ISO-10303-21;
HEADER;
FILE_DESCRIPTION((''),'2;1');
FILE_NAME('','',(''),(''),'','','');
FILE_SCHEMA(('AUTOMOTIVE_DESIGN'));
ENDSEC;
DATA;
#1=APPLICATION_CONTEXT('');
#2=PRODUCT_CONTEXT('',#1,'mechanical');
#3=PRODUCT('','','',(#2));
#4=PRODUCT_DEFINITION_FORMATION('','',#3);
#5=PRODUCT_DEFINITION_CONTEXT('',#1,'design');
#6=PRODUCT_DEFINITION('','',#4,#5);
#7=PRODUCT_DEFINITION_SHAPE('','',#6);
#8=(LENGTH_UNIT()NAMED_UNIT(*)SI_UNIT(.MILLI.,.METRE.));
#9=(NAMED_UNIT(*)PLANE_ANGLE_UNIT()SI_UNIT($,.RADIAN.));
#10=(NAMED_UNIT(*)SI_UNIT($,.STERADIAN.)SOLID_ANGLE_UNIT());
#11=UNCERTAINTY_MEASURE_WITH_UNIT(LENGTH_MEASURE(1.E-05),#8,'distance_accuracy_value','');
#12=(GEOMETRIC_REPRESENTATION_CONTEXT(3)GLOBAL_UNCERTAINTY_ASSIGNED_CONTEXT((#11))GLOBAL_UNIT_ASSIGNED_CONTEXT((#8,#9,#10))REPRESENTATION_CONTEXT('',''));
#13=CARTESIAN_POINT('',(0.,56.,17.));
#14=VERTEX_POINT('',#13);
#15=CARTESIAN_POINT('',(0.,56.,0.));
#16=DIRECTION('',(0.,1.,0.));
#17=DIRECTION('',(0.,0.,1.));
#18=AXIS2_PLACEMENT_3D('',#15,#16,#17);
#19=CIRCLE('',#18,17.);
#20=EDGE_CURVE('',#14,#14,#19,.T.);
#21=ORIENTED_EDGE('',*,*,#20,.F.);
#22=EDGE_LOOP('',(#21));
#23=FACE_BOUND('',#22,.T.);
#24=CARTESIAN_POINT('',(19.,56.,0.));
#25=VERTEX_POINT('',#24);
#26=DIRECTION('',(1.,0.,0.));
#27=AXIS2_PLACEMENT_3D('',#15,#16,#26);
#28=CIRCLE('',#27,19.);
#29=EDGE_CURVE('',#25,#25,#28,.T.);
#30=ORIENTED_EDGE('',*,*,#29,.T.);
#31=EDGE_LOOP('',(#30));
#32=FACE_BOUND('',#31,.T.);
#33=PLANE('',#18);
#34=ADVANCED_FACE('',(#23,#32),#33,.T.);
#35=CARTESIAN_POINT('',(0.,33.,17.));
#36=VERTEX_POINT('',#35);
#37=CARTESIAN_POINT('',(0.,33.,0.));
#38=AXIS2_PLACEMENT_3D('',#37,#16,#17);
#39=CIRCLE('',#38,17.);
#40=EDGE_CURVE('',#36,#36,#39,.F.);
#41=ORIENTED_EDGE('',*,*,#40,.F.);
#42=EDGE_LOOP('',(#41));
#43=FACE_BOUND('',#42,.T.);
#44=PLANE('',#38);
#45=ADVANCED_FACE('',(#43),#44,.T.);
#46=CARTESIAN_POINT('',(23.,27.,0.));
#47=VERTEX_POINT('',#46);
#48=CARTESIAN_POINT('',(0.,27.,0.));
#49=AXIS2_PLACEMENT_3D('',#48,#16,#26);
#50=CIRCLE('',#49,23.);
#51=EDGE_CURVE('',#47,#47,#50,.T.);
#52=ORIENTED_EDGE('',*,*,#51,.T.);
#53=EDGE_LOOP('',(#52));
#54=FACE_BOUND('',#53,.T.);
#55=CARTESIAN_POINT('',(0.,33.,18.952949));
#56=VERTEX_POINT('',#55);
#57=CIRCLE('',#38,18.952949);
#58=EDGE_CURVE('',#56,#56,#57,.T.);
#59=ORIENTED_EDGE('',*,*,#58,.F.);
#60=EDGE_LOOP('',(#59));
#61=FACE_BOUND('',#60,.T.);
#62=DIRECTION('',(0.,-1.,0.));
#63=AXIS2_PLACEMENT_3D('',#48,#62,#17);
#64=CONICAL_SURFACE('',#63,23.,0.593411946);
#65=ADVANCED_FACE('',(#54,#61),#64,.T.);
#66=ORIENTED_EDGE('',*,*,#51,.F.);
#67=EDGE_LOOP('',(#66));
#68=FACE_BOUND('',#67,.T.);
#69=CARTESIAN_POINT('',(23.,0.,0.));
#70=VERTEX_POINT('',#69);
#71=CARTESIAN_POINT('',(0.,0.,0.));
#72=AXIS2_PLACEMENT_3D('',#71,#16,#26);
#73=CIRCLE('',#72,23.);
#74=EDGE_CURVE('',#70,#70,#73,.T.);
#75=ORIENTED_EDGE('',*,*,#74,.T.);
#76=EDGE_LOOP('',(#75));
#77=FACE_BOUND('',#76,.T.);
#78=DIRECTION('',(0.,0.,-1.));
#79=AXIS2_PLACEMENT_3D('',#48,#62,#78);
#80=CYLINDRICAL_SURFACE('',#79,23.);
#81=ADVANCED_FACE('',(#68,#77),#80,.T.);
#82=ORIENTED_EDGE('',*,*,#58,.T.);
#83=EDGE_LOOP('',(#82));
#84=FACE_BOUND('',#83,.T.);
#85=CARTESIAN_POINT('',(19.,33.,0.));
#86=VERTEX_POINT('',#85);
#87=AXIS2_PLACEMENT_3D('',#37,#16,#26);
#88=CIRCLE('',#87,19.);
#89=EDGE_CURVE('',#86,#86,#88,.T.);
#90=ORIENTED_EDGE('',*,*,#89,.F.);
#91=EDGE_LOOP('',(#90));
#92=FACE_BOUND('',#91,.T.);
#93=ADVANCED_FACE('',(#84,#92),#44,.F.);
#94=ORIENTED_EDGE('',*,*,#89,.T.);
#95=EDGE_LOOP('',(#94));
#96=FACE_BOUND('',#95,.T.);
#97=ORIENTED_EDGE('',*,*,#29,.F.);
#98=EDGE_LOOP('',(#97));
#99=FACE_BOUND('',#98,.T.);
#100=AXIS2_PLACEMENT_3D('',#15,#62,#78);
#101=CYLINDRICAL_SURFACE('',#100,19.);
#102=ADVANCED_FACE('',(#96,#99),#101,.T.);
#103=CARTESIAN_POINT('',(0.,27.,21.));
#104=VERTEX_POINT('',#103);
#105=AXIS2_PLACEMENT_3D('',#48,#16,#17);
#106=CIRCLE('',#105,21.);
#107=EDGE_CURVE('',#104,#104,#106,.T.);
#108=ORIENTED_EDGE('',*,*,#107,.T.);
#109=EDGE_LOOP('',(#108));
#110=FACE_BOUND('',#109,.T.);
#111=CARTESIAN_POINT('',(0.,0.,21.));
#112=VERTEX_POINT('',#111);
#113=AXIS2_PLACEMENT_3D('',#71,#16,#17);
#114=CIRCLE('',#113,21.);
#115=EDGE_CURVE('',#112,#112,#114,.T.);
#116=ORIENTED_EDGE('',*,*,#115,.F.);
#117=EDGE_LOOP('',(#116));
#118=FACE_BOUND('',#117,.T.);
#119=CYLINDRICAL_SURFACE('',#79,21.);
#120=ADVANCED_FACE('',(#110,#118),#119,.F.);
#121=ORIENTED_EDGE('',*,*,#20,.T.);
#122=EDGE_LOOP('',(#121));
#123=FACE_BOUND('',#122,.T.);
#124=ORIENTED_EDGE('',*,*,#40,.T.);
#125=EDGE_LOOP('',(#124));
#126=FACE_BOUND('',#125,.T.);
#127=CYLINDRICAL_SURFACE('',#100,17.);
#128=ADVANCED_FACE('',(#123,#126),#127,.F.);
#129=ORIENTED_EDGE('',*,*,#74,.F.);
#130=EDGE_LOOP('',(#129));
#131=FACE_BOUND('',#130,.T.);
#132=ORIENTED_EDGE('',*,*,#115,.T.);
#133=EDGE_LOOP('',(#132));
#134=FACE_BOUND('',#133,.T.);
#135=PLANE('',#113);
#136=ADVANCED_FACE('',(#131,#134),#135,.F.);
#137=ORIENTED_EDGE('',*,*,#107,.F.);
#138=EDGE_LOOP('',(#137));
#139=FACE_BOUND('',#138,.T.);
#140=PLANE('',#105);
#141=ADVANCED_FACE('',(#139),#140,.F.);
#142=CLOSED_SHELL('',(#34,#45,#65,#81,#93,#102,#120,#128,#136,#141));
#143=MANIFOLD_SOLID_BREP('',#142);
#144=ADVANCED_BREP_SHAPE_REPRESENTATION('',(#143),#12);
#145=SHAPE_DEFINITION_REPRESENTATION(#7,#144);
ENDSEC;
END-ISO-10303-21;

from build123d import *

# Parameters (mm, degrees)
SKETCH1_R           = 23
SKETCH1_R_2         = 21
EXTRUDE_THIN1_DEPTH = 27
SKETCH2_R           = 19
SKETCH2_R_2         = 17
EXTRUDE_THIN2_DEPTH = 23
SKETCH3_R           = 21
BOSS_EXTRUDE1_DEPTH = 6
BOSS_EXTRUDE1_TAPER = 34
SKETCH4_R           = 23
BOSS_EXTRUDE2_DEPTH = 6
BOSS_EXTRUDE2_TAPER = 34


with BuildPart() as part:
    # Sketch1 → Extrude-Thin1 (new body)
    with BuildSketch(Plane(origin=(0, 0, 0), x_dir=(1, 0, 0), z_dir=(0, 1, 0))):
        Circle(SKETCH1_R)
        Circle(SKETCH1_R_2, mode=Mode.SUBTRACT)
    extrude(amount=EXTRUDE_THIN1_DEPTH)



with BuildPart() as body_2:
    # Sketch2 → Extrude-Thin2 (new body)
    with BuildSketch(Plane(origin=(0, 0, 0), x_dir=(1, 0, 0), z_dir=(0, 1, 0))):
        Circle(SKETCH2_R)
        Circle(SKETCH2_R_2, mode=Mode.SUBTRACT)
    extrude(amount=EXTRUDE_THIN2_DEPTH)


with BuildPart() as body_2_1:
    # Move Face1: read off the stored shape, not the designer's step
    # Move Face1: moved
    add(body_2.part.moved(Location((0, 33, 0))))


with BuildPart() as body_3:
    # Sketch3 → Boss-Extrude1 (new body)
    with BuildSketch(Plane(origin=(0, 27, 0), x_dir=(1, 0, 0), z_dir=(0, 1, 0))):
        with Locations(Location((0, 0, 0), (0, 0, 270))):
            Circle(SKETCH3_R)
    extrude(amount=BOSS_EXTRUDE1_DEPTH, taper=BOSS_EXTRUDE1_TAPER)


with BuildPart() as part_1:
    add(part.part)

    add(body_2_1.part)  # Boss-Extrude2 merges body 2

    add(body_3.part)  # Boss-Extrude2 merges body 3
    # Sketch4 → Boss-Extrude2 (add)
    with BuildSketch(Plane(origin=(0, 27, 0), x_dir=(1, 0, 0), z_dir=(0, 1, 0))):
        Circle(SKETCH4_R)
    extrude(amount=BOSS_EXTRUDE2_DEPTH, taper=BOSS_EXTRUDE2_TAPER)


solid = part_1.part
